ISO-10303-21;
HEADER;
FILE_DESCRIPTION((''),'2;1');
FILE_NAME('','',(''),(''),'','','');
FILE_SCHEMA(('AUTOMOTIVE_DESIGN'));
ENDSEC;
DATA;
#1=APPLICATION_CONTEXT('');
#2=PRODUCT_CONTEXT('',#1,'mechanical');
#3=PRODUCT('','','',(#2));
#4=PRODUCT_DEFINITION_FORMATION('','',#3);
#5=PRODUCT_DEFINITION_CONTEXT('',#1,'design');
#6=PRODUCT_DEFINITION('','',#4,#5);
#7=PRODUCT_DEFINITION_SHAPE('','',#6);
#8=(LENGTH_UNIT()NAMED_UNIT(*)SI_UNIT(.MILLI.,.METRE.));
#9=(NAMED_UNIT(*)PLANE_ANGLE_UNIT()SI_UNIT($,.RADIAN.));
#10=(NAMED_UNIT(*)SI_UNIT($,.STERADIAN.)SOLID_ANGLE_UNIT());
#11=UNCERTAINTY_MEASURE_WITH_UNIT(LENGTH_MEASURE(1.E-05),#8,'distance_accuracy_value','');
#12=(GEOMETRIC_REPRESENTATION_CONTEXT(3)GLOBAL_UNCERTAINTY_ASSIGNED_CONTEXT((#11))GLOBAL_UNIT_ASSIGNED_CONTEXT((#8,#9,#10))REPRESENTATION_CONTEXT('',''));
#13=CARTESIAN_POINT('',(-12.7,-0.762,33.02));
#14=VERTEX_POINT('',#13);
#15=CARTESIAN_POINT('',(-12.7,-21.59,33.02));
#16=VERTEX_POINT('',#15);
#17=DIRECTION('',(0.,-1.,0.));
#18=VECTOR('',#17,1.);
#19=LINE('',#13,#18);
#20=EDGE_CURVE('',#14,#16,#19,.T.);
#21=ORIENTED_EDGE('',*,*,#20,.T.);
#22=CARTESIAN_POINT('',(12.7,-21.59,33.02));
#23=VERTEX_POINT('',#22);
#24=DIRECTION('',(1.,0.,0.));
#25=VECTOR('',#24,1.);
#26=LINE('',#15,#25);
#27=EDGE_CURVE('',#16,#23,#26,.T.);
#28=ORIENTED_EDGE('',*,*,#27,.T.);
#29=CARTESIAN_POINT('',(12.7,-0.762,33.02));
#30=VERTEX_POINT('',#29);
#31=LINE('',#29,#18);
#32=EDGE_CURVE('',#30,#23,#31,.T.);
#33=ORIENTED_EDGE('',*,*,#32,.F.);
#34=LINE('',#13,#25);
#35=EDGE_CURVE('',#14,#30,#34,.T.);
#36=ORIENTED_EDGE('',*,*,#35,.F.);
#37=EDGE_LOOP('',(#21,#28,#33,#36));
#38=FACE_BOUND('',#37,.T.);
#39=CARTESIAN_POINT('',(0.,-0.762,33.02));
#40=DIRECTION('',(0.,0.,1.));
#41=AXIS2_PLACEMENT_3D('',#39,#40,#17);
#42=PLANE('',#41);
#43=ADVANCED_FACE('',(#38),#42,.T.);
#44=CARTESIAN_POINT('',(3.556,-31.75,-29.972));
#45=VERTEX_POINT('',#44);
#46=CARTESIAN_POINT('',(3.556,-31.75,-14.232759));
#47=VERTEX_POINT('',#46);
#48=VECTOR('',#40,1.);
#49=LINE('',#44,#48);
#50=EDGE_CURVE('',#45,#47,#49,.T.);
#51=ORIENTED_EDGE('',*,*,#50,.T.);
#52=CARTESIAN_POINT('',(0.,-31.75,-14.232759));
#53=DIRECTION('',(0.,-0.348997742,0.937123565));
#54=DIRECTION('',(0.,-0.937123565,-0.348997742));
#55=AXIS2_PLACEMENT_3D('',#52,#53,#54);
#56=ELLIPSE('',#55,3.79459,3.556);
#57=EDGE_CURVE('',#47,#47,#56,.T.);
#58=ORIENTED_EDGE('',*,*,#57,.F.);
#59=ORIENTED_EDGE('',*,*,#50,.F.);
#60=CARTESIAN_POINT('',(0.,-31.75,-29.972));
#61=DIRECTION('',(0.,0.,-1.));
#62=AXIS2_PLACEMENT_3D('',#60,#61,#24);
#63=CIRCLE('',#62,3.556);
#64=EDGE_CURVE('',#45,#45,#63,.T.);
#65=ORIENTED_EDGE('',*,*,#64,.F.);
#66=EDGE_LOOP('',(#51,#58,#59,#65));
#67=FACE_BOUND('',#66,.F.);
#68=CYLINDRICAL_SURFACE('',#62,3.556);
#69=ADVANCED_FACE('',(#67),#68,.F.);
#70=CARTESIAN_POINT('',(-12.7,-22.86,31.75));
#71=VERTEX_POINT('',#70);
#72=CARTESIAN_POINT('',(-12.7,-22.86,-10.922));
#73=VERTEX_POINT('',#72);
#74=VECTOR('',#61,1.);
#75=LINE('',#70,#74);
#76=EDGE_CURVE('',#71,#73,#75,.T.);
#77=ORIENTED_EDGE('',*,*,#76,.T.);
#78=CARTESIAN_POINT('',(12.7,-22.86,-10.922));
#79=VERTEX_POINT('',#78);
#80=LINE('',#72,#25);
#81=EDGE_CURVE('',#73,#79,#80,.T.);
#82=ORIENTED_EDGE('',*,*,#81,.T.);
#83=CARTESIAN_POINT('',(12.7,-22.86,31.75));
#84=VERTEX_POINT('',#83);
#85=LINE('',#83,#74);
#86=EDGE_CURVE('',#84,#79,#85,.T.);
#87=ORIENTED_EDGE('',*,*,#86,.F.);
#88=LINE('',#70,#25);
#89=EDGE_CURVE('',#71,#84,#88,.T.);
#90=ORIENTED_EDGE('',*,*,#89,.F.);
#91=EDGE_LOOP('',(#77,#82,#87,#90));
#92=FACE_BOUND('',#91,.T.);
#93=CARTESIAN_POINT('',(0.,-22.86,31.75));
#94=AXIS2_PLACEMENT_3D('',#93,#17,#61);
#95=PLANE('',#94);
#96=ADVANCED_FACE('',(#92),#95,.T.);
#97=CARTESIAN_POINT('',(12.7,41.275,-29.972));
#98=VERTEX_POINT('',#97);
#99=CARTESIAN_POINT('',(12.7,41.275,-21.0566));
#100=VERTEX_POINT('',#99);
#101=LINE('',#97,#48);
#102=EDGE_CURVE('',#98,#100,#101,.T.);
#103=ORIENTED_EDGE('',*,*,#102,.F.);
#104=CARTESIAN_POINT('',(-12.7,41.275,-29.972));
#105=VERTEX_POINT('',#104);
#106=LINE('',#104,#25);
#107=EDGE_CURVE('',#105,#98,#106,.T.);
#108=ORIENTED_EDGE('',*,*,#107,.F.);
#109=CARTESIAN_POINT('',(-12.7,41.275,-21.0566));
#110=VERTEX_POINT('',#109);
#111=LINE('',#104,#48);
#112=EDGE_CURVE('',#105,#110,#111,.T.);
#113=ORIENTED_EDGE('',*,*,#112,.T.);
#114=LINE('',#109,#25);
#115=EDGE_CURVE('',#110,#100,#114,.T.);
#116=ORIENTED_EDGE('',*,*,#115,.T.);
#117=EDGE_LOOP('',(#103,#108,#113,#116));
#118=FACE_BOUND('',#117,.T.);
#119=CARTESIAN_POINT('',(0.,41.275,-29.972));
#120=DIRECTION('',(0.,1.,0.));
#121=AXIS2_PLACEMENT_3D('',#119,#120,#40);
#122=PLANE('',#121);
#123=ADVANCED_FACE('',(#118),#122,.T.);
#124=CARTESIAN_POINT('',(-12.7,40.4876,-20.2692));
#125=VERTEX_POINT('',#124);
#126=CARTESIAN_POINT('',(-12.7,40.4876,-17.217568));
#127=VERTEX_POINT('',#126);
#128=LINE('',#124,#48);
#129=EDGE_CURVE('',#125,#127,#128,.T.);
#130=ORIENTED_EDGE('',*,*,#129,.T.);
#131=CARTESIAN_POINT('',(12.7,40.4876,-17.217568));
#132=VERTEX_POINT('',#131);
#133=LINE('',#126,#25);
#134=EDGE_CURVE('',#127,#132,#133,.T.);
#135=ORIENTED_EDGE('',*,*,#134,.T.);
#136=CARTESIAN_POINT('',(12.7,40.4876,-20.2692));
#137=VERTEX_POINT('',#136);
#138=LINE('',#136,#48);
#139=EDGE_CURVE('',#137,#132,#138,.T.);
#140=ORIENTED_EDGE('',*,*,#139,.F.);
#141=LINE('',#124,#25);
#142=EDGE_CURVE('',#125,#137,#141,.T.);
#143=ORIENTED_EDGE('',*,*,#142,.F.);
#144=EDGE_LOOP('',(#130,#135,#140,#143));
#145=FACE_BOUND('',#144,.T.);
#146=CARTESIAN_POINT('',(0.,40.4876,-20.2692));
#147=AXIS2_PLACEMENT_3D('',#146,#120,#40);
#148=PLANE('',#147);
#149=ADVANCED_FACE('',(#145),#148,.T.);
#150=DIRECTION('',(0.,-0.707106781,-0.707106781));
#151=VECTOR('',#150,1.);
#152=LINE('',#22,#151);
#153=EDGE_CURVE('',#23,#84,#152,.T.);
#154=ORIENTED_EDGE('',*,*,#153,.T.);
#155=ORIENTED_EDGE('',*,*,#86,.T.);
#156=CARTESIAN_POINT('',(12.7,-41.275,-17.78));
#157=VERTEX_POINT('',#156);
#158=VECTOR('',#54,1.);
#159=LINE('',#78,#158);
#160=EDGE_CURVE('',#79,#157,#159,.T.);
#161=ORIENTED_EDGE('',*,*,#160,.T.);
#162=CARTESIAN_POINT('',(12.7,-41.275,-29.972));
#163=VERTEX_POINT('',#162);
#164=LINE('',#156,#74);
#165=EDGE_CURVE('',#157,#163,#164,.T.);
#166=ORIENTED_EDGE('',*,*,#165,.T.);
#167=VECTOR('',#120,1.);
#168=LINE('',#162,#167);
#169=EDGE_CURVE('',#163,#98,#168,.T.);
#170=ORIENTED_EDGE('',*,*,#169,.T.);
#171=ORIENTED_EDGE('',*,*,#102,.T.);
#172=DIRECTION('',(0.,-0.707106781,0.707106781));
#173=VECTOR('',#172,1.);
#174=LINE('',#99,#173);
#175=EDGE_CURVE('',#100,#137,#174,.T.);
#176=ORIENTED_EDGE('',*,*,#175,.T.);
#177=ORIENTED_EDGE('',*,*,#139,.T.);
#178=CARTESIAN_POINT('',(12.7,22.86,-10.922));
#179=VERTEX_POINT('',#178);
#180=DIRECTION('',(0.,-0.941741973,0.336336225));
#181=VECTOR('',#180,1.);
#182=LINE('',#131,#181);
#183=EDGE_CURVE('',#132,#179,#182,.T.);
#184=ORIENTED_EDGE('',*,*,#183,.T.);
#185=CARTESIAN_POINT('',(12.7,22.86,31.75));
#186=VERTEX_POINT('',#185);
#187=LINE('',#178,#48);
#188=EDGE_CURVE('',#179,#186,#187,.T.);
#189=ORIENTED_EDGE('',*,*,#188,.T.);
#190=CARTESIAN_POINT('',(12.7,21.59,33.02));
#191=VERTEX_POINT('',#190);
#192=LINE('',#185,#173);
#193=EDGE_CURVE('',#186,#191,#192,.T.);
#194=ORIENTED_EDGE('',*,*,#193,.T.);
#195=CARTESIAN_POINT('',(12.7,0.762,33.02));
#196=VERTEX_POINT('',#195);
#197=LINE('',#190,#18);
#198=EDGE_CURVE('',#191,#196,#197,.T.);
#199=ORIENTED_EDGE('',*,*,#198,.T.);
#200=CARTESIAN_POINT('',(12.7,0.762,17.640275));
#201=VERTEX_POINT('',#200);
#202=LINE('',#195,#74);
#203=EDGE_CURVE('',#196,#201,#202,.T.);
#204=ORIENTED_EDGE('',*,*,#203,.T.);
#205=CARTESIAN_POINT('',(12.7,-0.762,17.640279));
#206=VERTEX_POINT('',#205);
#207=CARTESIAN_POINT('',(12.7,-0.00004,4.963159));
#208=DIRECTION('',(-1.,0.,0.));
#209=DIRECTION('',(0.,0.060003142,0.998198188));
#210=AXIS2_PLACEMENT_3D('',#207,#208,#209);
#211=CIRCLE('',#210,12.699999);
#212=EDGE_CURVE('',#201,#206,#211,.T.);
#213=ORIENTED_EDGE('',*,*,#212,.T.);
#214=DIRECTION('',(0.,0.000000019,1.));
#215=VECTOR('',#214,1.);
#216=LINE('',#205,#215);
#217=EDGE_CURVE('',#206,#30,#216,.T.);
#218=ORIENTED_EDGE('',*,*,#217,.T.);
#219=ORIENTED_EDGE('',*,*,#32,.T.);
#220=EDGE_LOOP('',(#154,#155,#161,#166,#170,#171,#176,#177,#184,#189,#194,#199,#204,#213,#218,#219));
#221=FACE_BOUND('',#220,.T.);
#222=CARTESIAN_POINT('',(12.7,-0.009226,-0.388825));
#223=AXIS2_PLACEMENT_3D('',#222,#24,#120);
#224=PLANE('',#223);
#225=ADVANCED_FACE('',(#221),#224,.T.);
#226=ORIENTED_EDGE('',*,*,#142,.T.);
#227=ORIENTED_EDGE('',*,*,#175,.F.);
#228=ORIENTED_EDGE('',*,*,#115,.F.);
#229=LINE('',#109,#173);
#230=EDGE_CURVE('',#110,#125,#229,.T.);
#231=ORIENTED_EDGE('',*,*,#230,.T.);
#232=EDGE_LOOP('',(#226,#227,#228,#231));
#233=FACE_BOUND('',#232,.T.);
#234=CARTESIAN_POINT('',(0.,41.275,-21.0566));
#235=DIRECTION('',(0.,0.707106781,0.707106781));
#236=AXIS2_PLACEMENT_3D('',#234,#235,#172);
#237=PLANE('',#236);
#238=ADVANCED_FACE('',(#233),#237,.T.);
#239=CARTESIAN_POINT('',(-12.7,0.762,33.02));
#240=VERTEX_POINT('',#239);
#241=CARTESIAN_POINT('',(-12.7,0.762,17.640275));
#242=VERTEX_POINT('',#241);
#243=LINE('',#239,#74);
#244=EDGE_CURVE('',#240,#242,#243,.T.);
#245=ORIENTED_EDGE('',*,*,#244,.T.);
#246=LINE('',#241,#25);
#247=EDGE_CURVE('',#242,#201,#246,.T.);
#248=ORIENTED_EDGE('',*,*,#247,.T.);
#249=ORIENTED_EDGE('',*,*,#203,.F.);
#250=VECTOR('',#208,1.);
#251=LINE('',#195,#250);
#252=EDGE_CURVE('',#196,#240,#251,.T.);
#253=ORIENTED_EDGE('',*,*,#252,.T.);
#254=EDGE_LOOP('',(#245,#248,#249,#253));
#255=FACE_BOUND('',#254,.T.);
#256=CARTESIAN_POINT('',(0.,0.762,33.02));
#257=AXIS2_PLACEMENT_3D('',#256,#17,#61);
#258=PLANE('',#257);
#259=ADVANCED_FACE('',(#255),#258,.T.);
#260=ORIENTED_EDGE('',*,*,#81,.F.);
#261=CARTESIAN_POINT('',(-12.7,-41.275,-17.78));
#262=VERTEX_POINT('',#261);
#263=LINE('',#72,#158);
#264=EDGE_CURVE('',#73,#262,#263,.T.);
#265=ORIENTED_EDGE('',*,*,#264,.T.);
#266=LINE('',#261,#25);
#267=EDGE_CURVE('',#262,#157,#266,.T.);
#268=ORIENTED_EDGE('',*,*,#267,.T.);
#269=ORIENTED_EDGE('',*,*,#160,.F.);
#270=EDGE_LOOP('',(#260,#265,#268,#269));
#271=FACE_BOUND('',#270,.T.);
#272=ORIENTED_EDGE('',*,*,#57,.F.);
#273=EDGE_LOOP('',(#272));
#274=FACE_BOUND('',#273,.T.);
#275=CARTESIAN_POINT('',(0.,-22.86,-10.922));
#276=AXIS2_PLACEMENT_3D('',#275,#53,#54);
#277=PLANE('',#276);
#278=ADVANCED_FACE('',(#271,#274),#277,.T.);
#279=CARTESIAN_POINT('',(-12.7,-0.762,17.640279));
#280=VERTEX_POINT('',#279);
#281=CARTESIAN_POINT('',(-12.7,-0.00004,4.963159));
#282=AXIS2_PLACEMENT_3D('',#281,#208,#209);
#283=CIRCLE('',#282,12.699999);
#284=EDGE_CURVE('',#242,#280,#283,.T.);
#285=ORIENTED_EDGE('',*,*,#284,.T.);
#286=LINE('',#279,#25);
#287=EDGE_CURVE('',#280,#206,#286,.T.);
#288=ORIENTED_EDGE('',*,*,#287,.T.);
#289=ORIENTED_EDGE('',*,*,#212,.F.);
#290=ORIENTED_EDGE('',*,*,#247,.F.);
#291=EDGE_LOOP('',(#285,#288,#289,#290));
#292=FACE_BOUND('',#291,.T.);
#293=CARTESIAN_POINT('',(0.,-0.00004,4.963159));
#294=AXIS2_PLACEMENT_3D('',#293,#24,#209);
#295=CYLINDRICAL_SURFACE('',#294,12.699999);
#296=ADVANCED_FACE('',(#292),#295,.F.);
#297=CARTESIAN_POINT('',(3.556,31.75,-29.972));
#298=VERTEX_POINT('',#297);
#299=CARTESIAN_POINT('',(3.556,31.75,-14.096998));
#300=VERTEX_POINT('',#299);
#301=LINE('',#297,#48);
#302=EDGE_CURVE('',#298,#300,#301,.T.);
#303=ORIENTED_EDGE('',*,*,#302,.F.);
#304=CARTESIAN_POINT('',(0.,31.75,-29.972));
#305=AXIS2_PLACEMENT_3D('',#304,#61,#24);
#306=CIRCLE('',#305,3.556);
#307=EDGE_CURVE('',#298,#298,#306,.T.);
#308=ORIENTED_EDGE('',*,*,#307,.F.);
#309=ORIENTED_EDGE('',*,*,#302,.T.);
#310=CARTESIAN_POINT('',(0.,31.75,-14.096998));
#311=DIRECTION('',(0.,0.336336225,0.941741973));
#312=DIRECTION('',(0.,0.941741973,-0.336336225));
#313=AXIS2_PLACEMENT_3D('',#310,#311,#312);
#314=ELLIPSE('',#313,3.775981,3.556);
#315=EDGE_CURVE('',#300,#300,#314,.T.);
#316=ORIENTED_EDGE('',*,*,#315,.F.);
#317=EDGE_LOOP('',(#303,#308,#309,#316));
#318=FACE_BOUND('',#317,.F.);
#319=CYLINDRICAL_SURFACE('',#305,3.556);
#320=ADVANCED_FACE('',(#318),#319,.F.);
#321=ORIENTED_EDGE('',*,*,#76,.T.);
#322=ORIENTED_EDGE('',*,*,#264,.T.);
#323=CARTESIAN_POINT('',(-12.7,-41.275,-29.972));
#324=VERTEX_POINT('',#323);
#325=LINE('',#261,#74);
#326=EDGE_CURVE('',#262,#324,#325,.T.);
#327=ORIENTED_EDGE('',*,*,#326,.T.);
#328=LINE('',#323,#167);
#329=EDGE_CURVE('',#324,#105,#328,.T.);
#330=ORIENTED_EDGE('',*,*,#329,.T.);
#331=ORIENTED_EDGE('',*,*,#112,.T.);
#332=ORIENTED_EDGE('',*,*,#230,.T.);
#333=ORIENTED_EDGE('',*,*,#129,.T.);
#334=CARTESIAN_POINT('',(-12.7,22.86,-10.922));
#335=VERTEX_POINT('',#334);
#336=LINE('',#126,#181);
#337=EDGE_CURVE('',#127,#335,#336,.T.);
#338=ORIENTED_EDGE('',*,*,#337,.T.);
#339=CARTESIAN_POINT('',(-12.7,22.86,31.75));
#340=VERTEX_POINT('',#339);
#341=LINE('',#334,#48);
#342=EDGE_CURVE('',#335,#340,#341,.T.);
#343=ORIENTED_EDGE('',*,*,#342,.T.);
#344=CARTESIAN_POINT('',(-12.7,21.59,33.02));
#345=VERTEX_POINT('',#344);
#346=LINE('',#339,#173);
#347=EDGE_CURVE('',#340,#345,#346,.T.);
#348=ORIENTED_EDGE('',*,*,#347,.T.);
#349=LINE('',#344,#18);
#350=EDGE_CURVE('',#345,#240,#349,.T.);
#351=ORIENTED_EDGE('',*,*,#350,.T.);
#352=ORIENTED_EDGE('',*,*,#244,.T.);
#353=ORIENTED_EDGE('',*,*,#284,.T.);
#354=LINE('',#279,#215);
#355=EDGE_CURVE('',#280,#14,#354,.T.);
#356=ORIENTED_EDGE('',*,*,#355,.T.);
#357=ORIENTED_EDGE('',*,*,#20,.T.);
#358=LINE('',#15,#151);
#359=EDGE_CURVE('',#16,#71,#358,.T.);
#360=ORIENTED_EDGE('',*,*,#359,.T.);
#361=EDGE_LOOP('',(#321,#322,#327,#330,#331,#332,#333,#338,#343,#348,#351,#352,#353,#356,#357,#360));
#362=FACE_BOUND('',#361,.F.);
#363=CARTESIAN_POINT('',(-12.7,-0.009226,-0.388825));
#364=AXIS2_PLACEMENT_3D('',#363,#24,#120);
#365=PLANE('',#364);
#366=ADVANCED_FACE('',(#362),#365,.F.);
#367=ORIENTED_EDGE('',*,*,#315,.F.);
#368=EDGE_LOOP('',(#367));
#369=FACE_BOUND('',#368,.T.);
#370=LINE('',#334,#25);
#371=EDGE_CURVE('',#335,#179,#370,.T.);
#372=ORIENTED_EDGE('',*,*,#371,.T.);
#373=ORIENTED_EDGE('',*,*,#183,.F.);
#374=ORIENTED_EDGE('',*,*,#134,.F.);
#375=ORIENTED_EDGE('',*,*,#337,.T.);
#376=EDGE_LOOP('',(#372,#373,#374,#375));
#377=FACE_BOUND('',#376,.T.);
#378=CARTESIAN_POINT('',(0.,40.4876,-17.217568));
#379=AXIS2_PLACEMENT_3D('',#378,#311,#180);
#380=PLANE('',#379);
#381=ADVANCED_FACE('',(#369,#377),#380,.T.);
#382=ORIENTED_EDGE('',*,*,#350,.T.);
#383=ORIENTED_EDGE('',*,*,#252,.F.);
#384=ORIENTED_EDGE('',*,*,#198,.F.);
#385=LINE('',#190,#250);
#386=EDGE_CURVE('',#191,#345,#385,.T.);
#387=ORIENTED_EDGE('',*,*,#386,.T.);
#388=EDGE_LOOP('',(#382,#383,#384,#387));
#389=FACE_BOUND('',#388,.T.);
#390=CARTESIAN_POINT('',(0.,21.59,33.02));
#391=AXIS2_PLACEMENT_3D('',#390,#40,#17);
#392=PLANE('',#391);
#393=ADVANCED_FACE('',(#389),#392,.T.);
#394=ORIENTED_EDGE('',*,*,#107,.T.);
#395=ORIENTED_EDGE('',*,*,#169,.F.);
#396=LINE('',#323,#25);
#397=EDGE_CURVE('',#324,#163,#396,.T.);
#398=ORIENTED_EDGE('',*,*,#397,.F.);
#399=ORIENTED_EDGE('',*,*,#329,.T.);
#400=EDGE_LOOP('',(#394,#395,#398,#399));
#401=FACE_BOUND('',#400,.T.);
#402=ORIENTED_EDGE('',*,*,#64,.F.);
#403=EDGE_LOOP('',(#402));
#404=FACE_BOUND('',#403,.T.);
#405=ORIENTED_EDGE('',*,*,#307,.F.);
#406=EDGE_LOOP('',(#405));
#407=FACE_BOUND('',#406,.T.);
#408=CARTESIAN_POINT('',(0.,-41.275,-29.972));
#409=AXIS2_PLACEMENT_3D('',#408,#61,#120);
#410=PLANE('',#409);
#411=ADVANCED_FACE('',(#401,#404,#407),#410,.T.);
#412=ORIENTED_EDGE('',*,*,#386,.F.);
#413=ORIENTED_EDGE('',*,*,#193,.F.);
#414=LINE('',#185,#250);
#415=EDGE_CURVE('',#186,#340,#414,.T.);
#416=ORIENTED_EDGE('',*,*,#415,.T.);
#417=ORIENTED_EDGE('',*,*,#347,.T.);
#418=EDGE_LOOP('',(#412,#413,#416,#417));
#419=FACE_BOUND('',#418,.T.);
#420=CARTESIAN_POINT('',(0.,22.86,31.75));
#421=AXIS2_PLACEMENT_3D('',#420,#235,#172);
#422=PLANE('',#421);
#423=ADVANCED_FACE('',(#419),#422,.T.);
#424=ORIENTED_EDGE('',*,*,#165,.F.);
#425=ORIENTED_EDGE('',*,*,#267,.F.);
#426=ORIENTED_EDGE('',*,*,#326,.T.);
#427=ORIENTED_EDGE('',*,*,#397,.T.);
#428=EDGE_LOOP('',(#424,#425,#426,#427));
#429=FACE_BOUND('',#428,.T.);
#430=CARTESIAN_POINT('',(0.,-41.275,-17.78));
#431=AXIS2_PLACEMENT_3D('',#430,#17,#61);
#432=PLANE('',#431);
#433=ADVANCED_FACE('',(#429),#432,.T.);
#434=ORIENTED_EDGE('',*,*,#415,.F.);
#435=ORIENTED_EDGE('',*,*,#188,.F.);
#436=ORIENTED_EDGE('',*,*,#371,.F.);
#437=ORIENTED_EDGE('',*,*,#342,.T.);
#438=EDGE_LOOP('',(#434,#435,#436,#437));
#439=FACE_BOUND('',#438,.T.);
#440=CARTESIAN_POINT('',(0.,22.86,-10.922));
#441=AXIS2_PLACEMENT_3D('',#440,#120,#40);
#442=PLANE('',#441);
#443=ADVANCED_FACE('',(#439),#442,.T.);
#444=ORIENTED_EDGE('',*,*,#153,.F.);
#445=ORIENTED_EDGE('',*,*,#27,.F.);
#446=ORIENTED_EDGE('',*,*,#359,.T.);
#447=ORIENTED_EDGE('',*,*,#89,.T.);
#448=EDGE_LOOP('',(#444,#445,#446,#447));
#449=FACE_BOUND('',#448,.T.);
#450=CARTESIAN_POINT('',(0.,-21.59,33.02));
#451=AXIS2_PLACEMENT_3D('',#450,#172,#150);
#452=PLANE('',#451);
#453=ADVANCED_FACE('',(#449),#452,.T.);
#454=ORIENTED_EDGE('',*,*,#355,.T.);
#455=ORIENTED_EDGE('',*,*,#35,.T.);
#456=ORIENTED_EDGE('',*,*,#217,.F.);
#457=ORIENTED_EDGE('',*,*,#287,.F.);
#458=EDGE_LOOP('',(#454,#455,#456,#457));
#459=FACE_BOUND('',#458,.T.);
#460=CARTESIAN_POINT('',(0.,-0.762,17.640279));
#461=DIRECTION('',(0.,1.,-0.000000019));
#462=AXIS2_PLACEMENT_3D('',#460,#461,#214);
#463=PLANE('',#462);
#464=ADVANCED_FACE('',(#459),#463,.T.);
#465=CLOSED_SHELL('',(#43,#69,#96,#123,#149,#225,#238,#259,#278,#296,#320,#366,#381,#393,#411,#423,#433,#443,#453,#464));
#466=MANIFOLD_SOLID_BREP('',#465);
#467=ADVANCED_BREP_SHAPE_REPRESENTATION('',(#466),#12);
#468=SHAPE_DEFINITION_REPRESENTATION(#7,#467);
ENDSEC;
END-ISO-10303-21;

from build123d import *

# Parameters (mm, degrees)
F1_DEPTH = 12.7
F2_R     = 3.556
F3_DEPTH = 62.993


# Not quite as in the source:
# - ends of sketch curves that miss each other by under 0.0002 mm in the source are joined


with BuildPart() as f1:
    # F0 (on Right) → F1 (new body, symmetric)
    with BuildSketch(Plane.YZ):
        with BuildLine():
            Line((0.762, 33.02), (0.762, 17.6402746))
            ThreePointArc((0.762, 17.6402746), (0, -7.73684), (-0.7620002868, 17.6402793716))
            Line((-0.7620002868, 17.6402793716), (-0.762, 33.02))
            Line((-0.762, 33.02), (-21.59, 33.02))
            Line((-21.59, 33.02), (-22.86, 31.75))
            Line((-22.86, 31.75), (-22.86, -10.922))
            Line((-22.86, -10.922), (-41.275, -17.78))
            Line((-41.275, -17.78), (-41.275, -29.972))
            Line((-41.275, -29.972), (41.275, -29.972))
            Line((41.275, -29.972), (41.275, -21.0566))
            Line((41.275, -21.0566), (40.4876, -20.2692))
            Line((40.4876, -20.2692), (40.4876, -17.2175678))
            Line((40.4876, -17.2175678), (22.86, -10.922))
            Line((22.86, -10.922), (22.86, 31.75))
            Line((22.86, 31.75), (21.59, 33.02))
            Line((21.59, 33.02), (0.762, 33.02))
        make_face()
    extrude(amount=F1_DEPTH, both=True)

    # F2 (on face) → F3 (cut, through all)
    with BuildSketch(Plane(origin=(0, 0, -29.972), x_dir=(1, 0, 0), z_dir=(0, 0, -1))):
        with Locations((0, 31.75)):
            Circle(F2_R)
        with Locations((0, -31.75)):
            Circle(F2_R)
    extrude(amount=-F3_DEPTH, mode=Mode.SUBTRACT)


solid = f1.part
